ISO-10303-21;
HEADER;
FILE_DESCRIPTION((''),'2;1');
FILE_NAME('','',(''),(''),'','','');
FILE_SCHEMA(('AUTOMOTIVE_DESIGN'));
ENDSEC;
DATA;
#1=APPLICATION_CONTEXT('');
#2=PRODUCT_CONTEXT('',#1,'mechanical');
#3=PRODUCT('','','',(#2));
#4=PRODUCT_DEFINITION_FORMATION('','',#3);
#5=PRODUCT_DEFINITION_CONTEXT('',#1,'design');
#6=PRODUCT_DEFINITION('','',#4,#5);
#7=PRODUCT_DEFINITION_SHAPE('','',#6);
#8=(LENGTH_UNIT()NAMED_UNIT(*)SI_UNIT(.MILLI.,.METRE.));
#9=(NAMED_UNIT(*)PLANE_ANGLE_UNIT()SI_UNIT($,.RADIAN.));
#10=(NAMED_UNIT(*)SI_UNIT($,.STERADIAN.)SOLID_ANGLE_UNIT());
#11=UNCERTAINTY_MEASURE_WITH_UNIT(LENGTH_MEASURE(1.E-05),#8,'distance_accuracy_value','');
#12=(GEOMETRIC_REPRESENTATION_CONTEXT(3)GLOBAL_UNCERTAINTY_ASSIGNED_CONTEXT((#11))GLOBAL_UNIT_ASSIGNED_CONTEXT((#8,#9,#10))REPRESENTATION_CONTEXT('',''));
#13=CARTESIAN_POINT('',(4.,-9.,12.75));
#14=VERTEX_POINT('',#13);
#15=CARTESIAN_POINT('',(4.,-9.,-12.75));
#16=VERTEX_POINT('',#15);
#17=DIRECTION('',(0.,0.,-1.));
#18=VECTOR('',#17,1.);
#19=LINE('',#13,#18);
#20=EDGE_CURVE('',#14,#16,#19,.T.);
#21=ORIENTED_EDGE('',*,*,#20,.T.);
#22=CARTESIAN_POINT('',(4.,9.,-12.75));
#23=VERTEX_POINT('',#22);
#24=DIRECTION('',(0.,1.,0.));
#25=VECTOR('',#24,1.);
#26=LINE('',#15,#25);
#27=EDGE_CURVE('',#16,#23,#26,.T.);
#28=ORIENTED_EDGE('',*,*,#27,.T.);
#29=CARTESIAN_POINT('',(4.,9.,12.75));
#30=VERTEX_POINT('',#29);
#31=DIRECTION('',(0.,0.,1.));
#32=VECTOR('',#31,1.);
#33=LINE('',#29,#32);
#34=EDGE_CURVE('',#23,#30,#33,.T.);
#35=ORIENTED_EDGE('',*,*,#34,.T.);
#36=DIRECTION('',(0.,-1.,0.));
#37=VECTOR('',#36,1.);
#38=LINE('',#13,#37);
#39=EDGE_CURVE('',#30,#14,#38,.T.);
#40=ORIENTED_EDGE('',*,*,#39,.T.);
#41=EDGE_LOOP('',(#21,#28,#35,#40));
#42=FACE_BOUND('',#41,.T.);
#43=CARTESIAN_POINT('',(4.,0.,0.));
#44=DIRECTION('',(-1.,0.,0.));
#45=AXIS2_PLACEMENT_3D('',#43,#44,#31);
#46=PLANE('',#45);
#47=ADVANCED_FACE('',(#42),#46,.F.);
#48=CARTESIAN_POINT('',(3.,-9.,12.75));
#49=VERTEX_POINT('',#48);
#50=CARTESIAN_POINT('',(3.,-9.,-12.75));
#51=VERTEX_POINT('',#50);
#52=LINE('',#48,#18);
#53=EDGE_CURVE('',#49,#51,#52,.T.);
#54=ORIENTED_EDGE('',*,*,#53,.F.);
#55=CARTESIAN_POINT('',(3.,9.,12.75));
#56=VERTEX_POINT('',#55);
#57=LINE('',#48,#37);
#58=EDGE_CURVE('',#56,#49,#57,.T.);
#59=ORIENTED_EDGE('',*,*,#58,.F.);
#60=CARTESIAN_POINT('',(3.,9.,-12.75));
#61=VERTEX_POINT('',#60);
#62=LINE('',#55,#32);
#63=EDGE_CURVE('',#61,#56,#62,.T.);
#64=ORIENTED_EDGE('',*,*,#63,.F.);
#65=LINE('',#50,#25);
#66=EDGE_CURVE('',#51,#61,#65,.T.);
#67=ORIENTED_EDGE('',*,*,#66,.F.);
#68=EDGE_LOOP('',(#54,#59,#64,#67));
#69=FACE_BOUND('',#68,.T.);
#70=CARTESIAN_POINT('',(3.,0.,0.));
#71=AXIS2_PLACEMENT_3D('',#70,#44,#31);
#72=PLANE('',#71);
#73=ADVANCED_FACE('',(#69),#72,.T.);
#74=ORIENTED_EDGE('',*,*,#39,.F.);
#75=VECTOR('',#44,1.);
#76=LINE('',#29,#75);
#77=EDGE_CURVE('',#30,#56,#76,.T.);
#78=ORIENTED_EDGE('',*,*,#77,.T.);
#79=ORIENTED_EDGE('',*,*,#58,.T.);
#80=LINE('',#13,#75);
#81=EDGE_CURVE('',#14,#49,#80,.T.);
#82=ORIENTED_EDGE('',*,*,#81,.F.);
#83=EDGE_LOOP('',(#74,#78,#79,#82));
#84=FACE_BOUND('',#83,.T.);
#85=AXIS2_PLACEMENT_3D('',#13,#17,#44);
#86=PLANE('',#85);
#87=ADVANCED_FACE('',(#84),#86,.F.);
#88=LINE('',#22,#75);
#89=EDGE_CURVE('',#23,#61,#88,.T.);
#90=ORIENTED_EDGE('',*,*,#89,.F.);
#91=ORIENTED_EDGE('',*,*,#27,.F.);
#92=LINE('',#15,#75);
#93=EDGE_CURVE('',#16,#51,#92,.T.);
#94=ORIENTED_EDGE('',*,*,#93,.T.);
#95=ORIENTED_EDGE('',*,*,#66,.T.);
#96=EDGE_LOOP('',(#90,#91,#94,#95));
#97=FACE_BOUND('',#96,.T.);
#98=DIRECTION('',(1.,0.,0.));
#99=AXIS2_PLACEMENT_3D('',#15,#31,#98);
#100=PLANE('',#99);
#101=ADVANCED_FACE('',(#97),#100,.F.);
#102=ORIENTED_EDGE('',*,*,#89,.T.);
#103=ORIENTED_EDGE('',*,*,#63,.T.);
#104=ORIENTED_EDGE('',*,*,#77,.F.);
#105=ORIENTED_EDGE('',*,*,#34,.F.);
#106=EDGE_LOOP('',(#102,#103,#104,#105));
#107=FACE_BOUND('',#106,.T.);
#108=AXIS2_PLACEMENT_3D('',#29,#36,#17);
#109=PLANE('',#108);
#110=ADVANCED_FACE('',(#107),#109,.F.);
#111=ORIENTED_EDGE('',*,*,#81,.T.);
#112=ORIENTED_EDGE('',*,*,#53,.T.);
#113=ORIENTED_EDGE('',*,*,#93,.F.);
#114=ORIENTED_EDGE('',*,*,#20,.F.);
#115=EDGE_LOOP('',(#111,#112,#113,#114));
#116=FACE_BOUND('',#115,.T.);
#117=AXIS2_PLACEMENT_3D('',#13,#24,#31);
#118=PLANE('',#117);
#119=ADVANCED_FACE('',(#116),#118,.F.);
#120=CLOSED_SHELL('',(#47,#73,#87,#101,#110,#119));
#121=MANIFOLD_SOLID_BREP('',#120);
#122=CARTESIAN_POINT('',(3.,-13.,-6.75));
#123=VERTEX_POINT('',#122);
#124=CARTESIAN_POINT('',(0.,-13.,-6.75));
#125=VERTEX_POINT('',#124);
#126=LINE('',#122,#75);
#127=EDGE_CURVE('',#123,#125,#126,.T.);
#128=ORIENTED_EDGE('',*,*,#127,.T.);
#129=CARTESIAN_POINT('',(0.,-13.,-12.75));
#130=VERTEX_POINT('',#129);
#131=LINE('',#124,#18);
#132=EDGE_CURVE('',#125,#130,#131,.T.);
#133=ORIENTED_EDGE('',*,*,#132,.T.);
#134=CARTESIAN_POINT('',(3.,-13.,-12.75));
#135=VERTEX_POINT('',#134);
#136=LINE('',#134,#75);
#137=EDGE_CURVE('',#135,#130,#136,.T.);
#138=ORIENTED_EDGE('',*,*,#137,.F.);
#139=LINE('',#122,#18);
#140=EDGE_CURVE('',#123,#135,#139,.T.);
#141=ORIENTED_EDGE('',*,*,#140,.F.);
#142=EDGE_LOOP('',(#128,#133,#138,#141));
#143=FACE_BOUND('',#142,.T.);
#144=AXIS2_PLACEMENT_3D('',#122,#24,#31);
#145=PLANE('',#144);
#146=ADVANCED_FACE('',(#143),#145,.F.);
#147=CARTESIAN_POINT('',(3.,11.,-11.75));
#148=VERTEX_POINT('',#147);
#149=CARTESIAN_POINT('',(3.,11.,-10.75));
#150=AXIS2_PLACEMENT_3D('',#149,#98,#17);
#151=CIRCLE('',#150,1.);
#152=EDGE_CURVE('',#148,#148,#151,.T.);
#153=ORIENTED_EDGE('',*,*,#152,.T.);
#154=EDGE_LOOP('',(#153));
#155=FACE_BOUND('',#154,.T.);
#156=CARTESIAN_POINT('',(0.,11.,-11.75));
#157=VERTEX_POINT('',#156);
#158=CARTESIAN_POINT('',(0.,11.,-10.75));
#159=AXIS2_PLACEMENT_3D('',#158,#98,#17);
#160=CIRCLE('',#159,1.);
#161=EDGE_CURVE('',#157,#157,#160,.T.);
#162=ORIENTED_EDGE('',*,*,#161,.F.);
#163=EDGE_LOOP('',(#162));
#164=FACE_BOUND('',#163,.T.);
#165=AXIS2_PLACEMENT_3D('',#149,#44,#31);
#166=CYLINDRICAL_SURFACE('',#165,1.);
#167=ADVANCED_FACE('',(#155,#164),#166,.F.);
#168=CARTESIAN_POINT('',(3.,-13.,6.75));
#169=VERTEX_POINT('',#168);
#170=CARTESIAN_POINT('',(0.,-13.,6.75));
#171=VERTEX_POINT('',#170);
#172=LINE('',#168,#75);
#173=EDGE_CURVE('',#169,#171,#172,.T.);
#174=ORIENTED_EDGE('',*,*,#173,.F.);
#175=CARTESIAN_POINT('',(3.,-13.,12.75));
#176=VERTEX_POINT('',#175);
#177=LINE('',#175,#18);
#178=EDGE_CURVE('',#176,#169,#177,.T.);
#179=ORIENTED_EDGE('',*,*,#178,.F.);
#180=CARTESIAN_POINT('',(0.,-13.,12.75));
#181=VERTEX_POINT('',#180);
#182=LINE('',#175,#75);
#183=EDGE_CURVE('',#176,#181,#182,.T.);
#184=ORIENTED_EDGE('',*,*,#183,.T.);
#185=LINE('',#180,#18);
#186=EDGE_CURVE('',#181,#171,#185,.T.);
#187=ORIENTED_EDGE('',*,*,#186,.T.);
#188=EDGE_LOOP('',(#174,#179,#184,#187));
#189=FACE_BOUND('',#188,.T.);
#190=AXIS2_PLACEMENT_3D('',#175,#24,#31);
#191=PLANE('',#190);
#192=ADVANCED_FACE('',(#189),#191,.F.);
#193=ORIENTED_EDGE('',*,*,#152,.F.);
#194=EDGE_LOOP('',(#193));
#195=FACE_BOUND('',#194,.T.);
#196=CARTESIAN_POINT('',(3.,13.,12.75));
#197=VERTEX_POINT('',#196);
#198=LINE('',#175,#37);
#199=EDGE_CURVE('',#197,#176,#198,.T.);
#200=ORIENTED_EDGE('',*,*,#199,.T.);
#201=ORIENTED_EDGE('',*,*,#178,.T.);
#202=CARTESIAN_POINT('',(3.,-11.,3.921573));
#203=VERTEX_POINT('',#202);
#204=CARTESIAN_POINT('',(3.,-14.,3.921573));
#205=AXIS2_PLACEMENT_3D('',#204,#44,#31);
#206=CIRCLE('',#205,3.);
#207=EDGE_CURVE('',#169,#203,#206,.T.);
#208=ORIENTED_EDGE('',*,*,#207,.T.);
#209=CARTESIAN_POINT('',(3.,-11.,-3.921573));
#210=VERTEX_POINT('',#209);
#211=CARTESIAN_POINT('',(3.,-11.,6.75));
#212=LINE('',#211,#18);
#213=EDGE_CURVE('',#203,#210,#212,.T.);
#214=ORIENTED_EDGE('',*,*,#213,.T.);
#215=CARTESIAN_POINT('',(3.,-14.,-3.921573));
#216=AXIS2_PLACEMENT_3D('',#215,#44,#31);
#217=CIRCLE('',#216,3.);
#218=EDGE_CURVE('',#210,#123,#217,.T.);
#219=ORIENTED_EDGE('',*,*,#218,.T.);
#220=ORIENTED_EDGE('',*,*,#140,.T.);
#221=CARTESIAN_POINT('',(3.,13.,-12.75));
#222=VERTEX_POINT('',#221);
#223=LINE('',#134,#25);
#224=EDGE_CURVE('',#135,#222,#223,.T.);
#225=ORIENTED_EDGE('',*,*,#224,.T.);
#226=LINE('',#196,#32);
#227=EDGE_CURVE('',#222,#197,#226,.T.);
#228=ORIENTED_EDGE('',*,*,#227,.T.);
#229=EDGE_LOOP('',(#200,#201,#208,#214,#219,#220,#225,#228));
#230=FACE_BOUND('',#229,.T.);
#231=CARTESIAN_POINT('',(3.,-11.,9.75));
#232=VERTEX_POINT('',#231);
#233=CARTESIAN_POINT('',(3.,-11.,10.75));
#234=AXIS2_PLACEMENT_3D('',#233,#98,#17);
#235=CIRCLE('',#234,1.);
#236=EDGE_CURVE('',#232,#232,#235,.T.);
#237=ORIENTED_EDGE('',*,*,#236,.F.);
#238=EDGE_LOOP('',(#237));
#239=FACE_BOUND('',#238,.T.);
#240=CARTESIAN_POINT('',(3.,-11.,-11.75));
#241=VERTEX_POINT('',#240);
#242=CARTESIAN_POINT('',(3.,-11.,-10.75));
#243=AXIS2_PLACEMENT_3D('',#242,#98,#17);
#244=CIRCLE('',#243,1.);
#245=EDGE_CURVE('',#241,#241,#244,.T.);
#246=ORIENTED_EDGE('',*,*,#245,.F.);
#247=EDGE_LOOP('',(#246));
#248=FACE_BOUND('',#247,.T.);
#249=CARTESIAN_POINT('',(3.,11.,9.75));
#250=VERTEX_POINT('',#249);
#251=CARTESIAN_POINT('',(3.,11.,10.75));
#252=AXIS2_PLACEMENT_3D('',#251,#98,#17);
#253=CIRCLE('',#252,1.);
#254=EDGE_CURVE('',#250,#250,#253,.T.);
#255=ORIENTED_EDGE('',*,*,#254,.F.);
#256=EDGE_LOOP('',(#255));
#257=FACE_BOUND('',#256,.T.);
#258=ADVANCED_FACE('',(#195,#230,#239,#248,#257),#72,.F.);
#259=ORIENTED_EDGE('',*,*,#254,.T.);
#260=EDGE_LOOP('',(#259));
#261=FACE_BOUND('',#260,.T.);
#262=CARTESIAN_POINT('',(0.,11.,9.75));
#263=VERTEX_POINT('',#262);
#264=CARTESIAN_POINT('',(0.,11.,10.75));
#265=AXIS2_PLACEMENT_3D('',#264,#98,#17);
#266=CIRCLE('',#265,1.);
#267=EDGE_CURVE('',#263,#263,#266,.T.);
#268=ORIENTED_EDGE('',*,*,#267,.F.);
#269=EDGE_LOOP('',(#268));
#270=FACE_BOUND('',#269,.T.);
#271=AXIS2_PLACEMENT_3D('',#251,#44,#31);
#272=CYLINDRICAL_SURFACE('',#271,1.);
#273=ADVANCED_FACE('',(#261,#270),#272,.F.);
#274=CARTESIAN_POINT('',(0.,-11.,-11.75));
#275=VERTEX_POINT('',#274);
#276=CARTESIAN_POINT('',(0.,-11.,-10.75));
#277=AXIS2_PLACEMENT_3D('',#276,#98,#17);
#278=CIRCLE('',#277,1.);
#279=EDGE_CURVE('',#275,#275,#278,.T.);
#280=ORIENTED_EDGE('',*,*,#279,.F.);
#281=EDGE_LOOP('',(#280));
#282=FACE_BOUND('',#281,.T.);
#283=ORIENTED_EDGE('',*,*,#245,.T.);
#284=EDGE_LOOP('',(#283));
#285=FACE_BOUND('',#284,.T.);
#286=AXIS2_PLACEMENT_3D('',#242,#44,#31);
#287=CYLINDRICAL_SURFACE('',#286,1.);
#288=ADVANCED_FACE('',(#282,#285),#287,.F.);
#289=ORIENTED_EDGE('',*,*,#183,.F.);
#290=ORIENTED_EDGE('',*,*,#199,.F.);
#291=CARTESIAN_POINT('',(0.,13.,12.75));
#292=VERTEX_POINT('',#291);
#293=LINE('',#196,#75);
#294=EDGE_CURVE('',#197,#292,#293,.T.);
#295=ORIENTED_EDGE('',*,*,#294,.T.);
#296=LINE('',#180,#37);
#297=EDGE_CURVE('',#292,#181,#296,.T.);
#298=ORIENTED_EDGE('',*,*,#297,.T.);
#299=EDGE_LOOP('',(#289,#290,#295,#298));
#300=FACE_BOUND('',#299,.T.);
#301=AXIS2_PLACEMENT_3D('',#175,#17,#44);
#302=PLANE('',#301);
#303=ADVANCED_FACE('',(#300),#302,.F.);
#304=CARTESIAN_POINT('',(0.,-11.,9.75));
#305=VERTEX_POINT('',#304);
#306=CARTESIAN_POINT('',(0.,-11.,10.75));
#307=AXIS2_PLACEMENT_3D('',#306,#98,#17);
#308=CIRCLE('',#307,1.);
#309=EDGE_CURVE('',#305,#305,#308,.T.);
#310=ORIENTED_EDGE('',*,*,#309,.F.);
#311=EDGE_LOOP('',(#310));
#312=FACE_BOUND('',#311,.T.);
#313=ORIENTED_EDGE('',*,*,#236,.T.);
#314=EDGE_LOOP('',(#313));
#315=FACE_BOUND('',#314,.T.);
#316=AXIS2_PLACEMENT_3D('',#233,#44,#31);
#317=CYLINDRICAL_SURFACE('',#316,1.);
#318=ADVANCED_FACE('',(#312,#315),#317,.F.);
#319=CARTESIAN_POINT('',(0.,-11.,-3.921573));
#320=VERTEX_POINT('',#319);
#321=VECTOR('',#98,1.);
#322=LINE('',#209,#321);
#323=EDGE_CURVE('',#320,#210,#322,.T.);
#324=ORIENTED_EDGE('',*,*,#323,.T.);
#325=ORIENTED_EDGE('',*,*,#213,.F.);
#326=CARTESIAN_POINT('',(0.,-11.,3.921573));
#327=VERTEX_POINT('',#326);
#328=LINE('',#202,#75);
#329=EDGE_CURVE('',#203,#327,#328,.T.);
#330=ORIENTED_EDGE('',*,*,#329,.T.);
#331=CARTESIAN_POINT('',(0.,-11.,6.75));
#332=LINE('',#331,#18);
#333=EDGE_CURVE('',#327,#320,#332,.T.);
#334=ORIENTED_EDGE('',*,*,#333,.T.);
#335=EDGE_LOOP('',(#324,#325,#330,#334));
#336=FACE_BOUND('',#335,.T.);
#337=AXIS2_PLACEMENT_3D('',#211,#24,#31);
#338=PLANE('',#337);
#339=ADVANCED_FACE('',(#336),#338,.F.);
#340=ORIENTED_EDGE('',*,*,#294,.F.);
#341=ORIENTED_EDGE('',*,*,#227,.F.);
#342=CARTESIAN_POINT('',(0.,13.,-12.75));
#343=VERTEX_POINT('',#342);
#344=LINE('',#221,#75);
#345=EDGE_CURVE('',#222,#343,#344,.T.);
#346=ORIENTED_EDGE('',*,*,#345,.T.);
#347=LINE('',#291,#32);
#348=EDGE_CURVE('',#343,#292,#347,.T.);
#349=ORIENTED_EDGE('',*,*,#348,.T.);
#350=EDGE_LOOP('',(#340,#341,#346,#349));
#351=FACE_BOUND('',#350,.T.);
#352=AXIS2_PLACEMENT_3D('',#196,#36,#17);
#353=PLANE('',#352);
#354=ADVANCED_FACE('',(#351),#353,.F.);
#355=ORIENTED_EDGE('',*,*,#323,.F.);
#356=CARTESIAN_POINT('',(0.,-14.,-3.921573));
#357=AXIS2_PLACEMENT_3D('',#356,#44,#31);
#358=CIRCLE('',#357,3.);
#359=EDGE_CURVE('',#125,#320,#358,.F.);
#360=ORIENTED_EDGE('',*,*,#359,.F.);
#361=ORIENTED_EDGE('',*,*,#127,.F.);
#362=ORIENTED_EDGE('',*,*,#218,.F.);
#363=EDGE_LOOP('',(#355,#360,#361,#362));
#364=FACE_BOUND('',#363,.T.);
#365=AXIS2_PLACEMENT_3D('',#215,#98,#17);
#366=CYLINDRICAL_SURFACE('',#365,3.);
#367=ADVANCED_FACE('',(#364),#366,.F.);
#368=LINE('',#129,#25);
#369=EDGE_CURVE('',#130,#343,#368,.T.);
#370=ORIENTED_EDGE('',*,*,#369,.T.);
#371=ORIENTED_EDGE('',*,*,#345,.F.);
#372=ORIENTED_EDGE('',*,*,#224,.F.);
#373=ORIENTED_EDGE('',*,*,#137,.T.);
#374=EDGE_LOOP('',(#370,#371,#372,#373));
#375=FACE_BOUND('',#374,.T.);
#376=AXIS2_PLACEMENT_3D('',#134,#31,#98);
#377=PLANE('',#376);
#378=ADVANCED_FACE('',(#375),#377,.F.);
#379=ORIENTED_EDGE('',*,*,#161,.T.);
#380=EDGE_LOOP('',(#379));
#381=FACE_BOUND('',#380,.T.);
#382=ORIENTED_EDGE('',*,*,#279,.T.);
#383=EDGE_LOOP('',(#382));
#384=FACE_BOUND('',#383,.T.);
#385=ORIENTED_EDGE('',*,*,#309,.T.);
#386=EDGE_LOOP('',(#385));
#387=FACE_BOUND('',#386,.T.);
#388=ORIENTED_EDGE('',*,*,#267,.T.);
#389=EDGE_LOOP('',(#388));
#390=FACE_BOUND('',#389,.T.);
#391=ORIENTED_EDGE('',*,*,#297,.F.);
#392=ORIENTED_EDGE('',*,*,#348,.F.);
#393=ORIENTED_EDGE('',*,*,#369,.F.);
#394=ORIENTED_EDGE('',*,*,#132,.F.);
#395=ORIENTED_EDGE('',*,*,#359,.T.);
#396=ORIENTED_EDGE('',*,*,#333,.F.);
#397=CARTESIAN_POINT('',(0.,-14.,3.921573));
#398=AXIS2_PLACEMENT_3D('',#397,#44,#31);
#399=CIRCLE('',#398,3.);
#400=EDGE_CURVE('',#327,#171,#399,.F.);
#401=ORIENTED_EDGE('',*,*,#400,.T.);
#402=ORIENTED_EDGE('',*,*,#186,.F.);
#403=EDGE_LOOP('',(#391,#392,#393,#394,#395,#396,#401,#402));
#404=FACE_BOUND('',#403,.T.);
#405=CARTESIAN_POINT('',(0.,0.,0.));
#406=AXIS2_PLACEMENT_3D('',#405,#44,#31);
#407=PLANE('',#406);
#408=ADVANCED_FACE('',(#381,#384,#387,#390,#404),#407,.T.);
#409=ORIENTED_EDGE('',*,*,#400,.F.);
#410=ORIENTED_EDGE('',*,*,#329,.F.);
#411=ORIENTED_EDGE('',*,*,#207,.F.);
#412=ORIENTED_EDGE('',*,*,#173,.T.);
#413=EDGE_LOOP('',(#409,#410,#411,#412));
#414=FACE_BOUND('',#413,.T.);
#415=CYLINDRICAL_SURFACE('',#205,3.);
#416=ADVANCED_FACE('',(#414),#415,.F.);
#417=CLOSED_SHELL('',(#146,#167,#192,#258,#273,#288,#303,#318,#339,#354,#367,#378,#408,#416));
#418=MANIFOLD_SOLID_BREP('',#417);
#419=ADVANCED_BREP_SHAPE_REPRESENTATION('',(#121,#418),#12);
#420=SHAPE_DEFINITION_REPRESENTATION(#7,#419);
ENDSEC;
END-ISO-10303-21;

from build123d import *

# Parameters (mm, degrees)
SKETCH_1_R      = 1
EXTRUDE_1_DEPTH = 3
FILLET_1_R      = 3
SKETCH_2_W      = 25.5
SKETCH_2_H      = 18
EXTRUDE_2_DEPTH = 1


with BuildPart() as part:
    # 草图1 → 凸台-拉伸1 (new body)
    with BuildSketch(Plane(origin=(0, 0, 0), x_dir=(0, 0, -1), z_dir=(1, 0, 0))):
        Polygon((-12.75, -13), (-6.75, -13), (-6.75, -11), (6.75, -11), (6.75, -13), (12.75, -13), (12.75, 13), (-12.75, 13), align=None)
        with Locations((-10.75, -11)):
            Circle(SKETCH_1_R, mode=Mode.SUBTRACT)
        with Locations((-10.75, 11)):
            Circle(SKETCH_1_R, mode=Mode.SUBTRACT)
        with Locations((10.75, 11)):
            Circle(SKETCH_1_R, mode=Mode.SUBTRACT)
        with Locations((10.75, -11)):
            Circle(SKETCH_1_R, mode=Mode.SUBTRACT)
    extrude(amount=EXTRUDE_1_DEPTH)

    # 圆角1
    # the kernel refuses this fillet: 3 mm, written as the material it adds along each edge
    with BuildSketch(Plane(origin=(0, -11, 6.75), x_dir=(0, -1, 0), z_dir=(1, 0, 0))) as fillet_1_piece_1:
        with BuildLine():
            CenterArc((3, 2.828427125), FILLET_1_R, 180, 70.528779366)
            Line((0, 2.828427125), (-0.06, 2.828427125))
            Line((-0.06, 2.828427125), (-0.06, 0))
            Line((-0.06, 0), (0, -0.06))
            ThreePointArc((0, -0.06), (1, -0.06), (1.98, -0.056568542))
            Line((1.98, -0.056568542), (2, 0))
        make_face()
    extrude(amount=3)
    with BuildSketch(Plane(origin=(0, -11, -6.75), x_dir=(0, 0, 1), z_dir=(1, 0, 0))) as fillet_1_piece_2:
        with BuildLine():
            CenterArc((2.828427125, 3), FILLET_1_R, 199.471220634, 70.528779366)
            Line((0, 2), (-0.056568542, 1.98))
            ThreePointArc((-0.056568542, 1.98), (-0.06, 1), (-0.06, 0))
            Line((-0.06, 0), (0, -0.06))
            Line((0, -0.06), (2.828427125, -0.06))
            Line((2.828427125, -0.06), (2.828427125, 0))
        make_face()
    extrude(amount=3)


with BuildPart() as body_2:
    # 草图2 → 凸台-拉伸2 (new body)
    with BuildSketch(Plane(origin=(3, 0, 0), x_dir=(0, 0, -1), z_dir=(1, 0, 0))):
        Rectangle(SKETCH_2_W, SKETCH_2_H)
    extrude(amount=EXTRUDE_2_DEPTH)


solid = Compound([part.part, body_2.part])
